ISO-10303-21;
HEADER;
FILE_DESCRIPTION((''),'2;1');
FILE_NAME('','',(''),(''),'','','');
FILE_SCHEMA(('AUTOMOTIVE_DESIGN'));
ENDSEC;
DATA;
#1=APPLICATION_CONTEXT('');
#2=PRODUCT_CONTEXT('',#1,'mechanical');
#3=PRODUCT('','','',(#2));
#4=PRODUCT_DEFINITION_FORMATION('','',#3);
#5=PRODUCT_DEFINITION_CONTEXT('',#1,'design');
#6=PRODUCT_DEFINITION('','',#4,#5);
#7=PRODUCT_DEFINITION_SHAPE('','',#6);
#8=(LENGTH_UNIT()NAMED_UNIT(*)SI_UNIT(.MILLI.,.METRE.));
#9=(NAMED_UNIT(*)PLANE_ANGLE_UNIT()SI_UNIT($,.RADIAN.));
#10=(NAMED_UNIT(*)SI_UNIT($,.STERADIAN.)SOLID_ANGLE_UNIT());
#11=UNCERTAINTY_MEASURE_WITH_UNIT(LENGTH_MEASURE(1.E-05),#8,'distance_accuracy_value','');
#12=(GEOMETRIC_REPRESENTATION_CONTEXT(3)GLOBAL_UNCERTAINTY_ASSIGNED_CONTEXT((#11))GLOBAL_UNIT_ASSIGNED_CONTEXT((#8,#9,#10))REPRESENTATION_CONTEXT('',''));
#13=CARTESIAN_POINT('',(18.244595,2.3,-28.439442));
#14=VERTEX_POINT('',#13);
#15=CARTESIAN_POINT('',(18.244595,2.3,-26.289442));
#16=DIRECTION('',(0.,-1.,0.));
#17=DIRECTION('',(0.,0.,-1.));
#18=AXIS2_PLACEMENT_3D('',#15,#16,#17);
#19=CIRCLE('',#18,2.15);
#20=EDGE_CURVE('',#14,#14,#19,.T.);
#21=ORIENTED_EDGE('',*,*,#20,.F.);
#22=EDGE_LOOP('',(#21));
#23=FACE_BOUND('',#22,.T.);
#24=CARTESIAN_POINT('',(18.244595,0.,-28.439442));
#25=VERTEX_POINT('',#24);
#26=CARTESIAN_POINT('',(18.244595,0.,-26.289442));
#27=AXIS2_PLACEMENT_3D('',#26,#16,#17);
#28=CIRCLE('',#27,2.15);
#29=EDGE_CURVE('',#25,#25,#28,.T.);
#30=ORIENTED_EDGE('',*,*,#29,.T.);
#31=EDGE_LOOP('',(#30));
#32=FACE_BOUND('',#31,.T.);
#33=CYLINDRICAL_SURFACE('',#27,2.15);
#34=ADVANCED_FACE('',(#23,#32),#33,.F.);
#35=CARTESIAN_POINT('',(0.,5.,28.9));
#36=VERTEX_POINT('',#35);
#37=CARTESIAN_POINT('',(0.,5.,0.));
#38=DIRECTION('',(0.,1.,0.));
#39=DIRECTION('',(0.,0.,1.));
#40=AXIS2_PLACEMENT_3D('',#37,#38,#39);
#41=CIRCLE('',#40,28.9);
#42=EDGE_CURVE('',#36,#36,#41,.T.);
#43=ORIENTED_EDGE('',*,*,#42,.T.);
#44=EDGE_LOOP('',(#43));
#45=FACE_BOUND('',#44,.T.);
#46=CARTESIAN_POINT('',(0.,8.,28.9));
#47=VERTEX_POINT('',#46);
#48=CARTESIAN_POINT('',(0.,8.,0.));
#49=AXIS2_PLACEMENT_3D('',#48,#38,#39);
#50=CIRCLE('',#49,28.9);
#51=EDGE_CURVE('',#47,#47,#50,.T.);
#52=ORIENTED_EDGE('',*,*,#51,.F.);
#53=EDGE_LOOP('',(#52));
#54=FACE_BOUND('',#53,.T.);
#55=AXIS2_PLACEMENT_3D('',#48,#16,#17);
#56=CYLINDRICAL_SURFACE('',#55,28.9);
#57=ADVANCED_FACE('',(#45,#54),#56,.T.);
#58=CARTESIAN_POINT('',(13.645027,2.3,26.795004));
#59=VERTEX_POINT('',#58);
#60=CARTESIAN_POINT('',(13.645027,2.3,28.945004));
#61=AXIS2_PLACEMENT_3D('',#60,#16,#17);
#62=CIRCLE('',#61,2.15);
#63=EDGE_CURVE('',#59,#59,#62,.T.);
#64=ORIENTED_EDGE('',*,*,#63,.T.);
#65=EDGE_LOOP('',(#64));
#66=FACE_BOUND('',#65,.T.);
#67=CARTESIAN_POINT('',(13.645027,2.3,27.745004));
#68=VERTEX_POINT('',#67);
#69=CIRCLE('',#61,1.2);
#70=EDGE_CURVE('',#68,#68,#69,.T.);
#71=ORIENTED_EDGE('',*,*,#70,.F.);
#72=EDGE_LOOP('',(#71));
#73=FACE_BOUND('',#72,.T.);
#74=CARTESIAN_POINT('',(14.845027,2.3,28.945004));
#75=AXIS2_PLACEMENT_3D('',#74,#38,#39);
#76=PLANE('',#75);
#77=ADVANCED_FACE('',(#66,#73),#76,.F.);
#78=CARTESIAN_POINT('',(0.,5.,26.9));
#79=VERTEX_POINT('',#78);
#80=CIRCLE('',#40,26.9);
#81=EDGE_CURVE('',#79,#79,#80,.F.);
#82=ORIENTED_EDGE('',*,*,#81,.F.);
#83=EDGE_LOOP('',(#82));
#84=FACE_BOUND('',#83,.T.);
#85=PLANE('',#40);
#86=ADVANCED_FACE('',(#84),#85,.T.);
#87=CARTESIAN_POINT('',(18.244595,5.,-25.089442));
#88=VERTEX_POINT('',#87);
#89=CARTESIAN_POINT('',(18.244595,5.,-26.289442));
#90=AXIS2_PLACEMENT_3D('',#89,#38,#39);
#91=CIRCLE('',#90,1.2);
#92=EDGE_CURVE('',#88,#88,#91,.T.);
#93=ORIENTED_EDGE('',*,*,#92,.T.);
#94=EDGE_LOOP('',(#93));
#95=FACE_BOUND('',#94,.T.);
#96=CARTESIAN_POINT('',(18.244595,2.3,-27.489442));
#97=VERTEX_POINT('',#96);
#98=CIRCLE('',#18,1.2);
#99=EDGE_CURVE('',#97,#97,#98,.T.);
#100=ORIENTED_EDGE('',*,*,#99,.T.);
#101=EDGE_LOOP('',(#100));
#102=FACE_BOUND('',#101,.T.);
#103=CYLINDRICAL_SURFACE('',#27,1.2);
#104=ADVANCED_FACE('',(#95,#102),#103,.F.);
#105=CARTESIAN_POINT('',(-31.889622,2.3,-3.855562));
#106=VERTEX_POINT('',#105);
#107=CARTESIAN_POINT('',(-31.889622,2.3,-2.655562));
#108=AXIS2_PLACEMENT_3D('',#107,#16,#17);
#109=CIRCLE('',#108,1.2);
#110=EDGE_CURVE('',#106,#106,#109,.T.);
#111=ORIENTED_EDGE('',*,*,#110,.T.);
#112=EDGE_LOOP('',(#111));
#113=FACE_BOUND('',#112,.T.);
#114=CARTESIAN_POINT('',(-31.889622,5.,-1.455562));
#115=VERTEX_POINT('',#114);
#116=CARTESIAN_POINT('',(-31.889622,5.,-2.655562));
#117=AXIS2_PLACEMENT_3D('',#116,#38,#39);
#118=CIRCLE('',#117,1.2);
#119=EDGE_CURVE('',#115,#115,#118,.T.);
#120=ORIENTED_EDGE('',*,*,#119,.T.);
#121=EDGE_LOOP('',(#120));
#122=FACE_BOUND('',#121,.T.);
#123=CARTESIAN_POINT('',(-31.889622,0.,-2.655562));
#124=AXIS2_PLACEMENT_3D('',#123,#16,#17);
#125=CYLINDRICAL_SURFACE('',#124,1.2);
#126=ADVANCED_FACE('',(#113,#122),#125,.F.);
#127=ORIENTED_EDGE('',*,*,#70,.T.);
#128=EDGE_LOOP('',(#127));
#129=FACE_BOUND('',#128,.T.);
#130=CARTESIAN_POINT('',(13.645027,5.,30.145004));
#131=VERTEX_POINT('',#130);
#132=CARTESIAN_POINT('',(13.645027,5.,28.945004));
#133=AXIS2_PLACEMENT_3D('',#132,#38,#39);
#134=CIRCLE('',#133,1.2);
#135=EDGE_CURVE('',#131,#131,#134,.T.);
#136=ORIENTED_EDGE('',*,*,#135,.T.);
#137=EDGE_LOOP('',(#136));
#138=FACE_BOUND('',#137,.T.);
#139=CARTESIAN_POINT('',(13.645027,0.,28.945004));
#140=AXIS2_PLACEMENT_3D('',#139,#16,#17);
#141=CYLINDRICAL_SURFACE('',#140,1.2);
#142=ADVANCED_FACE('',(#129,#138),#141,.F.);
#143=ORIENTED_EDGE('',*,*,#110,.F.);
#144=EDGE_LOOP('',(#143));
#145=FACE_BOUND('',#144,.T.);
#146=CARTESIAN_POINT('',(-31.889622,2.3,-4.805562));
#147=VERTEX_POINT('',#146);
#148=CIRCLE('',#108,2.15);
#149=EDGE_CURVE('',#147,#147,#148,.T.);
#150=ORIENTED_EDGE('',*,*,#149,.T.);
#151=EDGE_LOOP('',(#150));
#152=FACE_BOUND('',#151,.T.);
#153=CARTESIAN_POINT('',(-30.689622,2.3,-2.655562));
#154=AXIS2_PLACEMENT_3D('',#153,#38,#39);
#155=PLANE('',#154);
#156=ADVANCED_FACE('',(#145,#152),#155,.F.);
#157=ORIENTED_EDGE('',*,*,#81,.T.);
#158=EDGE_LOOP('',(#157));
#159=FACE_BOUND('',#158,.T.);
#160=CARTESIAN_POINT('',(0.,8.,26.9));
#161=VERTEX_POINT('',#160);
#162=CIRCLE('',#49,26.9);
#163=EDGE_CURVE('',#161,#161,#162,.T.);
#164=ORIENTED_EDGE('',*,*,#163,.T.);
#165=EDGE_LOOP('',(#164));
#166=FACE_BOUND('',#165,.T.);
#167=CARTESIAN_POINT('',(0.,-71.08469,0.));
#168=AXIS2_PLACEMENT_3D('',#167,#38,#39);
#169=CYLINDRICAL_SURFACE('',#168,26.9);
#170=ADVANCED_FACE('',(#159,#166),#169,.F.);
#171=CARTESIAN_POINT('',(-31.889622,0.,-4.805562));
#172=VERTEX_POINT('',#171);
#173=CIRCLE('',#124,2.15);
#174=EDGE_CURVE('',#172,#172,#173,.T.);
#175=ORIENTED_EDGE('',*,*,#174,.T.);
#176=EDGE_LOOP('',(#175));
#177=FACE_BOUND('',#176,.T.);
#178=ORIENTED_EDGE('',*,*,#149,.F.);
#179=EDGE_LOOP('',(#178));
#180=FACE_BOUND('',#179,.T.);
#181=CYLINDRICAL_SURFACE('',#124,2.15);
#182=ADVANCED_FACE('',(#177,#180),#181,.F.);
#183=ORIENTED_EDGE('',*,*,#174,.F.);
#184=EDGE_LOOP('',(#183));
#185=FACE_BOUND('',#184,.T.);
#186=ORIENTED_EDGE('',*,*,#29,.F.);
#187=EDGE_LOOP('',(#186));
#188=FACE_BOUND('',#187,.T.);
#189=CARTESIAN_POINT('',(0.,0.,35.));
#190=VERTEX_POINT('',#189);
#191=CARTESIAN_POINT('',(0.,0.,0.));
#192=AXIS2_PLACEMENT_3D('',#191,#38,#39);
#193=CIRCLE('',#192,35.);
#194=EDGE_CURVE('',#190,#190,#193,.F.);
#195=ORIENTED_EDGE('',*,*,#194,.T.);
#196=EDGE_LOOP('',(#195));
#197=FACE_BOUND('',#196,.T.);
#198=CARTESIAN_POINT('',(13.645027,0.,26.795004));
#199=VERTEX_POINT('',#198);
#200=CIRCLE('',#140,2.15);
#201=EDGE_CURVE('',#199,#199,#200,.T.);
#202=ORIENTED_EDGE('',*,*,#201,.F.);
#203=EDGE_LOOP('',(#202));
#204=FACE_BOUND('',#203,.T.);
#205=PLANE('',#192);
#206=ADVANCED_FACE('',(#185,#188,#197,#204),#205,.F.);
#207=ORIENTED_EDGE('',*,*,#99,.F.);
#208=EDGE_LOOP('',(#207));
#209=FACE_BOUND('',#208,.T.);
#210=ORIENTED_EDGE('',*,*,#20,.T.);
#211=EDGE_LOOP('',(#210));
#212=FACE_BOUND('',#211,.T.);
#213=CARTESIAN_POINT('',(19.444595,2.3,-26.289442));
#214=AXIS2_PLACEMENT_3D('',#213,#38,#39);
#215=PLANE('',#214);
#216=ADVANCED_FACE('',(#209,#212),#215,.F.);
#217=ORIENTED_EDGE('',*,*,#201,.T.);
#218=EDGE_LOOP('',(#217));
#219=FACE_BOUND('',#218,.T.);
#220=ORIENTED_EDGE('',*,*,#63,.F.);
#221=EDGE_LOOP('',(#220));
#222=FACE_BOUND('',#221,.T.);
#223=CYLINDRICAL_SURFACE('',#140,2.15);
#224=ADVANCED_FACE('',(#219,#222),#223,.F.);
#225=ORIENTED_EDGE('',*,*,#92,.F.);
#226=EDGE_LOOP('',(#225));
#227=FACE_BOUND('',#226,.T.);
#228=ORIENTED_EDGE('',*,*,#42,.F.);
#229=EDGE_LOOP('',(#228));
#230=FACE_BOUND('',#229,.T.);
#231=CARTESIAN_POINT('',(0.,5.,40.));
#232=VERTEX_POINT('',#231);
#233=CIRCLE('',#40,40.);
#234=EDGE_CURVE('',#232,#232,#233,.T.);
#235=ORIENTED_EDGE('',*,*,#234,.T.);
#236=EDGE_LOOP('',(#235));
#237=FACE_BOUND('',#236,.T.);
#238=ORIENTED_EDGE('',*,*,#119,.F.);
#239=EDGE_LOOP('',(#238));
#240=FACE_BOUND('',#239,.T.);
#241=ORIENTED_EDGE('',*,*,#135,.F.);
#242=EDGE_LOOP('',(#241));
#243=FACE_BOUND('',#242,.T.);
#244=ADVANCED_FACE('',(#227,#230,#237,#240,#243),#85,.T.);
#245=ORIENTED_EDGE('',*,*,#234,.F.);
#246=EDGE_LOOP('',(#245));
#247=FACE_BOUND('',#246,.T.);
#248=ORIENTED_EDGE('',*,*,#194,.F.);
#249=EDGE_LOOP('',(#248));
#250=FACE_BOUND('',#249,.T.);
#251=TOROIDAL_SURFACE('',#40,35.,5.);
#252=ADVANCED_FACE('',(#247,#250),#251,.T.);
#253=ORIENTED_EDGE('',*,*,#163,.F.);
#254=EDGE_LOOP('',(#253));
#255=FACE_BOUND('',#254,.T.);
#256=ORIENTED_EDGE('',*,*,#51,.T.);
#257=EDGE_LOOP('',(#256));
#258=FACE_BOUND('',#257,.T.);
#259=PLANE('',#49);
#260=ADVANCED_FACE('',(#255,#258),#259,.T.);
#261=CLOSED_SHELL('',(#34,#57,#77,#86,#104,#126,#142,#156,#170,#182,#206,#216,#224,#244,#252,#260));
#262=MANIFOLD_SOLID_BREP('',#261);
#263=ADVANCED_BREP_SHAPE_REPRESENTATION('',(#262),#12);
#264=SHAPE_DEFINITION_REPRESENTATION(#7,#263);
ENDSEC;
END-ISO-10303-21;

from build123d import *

# Parameters (mm, degrees)
SKETCH_1_R                = 40
EXTRUDE_1_DEPTH           = 5
SKETCH_2_R                = 28.9
EXTRUDE_2_DEPTH           = 3
HOLE_WIZARD_1_D           = 2.4
HOLE_WIZARD_1_CBORE_D     = 4.3
HOLE_WIZARD_1_CBORE_DEPTH = 2.3
PATTERN_CIRCULAR_1_COUNT  = 3
SKETCH_7_R                = 26.9
CUT_EXTRUDE_1_DEPTH       = 3
FILLET_1_R                = 5


with BuildPart() as part:
    # 草图1 → 凸台-拉伸1 (new body)
    with BuildSketch(Plane(origin=(0, 0, 0), x_dir=(1, 0, 0), z_dir=(0, 1, 0))):
        with Locations(Location((0, 0, 0), (0, 0, 270))):
            Circle(SKETCH_1_R)
    extrude(amount=EXTRUDE_1_DEPTH)

    # 草图2 → 凸台-拉伸2 (add)
    with BuildSketch(Plane(origin=(0, 5, 0), x_dir=(1, 0, 0), z_dir=(0, 1, 0))):
        with Locations(Location((0, 0, 0), (0, 0, 270))):
            Circle(SKETCH_2_R)
    extrude(amount=EXTRUDE_2_DEPTH)

    # 打孔尺寸(%根据)内六角圆柱头螺钉的类型1 (through all)
    with Locations(Plane(origin=(0, 0, 0), x_dir=(-1, 0, 0), z_dir=(0, -1, 0))):
        with Locations((-13.645026716, -28.945003816)):
            hole_wizard_1 = CounterBoreHole(HOLE_WIZARD_1_D / 2, HOLE_WIZARD_1_CBORE_D / 2, HOLE_WIZARD_1_CBORE_DEPTH)

    # 阵列(圆周)1: 打孔尺寸(%根据)内六角圆柱头螺钉的类型1 ×3 about axis
    pattern_circular_1_axis = Axis((0, 0, 0), (0, 1, 0))
    for i in range(1, PATTERN_CIRCULAR_1_COUNT):
        add(hole_wizard_1.rotate(pattern_circular_1_axis, i * 360 / PATTERN_CIRCULAR_1_COUNT), mode=Mode.SUBTRACT)

    # 草图7 → 切除-拉伸1 (cut)
    with BuildSketch(Plane(origin=(0, 8, 0), x_dir=(1, 0, 0), z_dir=(0, 1, 0))):
        with Locations(Location((0, 0, 0), (0, 0, 270))):
            Circle(SKETCH_7_R)
    extrude(amount=-CUT_EXTRUDE_1_DEPTH, mode=Mode.SUBTRACT)

    # 圆角1
    fillet_1_edges = [part.edges().sort_by_distance(p)[0] for p in [
        (0, 0, -40),
    ]]
    fillet(fillet_1_edges, radius=FILLET_1_R - 0.0001)  # a hair under: the kernel refuses the full size


solid = part.part
